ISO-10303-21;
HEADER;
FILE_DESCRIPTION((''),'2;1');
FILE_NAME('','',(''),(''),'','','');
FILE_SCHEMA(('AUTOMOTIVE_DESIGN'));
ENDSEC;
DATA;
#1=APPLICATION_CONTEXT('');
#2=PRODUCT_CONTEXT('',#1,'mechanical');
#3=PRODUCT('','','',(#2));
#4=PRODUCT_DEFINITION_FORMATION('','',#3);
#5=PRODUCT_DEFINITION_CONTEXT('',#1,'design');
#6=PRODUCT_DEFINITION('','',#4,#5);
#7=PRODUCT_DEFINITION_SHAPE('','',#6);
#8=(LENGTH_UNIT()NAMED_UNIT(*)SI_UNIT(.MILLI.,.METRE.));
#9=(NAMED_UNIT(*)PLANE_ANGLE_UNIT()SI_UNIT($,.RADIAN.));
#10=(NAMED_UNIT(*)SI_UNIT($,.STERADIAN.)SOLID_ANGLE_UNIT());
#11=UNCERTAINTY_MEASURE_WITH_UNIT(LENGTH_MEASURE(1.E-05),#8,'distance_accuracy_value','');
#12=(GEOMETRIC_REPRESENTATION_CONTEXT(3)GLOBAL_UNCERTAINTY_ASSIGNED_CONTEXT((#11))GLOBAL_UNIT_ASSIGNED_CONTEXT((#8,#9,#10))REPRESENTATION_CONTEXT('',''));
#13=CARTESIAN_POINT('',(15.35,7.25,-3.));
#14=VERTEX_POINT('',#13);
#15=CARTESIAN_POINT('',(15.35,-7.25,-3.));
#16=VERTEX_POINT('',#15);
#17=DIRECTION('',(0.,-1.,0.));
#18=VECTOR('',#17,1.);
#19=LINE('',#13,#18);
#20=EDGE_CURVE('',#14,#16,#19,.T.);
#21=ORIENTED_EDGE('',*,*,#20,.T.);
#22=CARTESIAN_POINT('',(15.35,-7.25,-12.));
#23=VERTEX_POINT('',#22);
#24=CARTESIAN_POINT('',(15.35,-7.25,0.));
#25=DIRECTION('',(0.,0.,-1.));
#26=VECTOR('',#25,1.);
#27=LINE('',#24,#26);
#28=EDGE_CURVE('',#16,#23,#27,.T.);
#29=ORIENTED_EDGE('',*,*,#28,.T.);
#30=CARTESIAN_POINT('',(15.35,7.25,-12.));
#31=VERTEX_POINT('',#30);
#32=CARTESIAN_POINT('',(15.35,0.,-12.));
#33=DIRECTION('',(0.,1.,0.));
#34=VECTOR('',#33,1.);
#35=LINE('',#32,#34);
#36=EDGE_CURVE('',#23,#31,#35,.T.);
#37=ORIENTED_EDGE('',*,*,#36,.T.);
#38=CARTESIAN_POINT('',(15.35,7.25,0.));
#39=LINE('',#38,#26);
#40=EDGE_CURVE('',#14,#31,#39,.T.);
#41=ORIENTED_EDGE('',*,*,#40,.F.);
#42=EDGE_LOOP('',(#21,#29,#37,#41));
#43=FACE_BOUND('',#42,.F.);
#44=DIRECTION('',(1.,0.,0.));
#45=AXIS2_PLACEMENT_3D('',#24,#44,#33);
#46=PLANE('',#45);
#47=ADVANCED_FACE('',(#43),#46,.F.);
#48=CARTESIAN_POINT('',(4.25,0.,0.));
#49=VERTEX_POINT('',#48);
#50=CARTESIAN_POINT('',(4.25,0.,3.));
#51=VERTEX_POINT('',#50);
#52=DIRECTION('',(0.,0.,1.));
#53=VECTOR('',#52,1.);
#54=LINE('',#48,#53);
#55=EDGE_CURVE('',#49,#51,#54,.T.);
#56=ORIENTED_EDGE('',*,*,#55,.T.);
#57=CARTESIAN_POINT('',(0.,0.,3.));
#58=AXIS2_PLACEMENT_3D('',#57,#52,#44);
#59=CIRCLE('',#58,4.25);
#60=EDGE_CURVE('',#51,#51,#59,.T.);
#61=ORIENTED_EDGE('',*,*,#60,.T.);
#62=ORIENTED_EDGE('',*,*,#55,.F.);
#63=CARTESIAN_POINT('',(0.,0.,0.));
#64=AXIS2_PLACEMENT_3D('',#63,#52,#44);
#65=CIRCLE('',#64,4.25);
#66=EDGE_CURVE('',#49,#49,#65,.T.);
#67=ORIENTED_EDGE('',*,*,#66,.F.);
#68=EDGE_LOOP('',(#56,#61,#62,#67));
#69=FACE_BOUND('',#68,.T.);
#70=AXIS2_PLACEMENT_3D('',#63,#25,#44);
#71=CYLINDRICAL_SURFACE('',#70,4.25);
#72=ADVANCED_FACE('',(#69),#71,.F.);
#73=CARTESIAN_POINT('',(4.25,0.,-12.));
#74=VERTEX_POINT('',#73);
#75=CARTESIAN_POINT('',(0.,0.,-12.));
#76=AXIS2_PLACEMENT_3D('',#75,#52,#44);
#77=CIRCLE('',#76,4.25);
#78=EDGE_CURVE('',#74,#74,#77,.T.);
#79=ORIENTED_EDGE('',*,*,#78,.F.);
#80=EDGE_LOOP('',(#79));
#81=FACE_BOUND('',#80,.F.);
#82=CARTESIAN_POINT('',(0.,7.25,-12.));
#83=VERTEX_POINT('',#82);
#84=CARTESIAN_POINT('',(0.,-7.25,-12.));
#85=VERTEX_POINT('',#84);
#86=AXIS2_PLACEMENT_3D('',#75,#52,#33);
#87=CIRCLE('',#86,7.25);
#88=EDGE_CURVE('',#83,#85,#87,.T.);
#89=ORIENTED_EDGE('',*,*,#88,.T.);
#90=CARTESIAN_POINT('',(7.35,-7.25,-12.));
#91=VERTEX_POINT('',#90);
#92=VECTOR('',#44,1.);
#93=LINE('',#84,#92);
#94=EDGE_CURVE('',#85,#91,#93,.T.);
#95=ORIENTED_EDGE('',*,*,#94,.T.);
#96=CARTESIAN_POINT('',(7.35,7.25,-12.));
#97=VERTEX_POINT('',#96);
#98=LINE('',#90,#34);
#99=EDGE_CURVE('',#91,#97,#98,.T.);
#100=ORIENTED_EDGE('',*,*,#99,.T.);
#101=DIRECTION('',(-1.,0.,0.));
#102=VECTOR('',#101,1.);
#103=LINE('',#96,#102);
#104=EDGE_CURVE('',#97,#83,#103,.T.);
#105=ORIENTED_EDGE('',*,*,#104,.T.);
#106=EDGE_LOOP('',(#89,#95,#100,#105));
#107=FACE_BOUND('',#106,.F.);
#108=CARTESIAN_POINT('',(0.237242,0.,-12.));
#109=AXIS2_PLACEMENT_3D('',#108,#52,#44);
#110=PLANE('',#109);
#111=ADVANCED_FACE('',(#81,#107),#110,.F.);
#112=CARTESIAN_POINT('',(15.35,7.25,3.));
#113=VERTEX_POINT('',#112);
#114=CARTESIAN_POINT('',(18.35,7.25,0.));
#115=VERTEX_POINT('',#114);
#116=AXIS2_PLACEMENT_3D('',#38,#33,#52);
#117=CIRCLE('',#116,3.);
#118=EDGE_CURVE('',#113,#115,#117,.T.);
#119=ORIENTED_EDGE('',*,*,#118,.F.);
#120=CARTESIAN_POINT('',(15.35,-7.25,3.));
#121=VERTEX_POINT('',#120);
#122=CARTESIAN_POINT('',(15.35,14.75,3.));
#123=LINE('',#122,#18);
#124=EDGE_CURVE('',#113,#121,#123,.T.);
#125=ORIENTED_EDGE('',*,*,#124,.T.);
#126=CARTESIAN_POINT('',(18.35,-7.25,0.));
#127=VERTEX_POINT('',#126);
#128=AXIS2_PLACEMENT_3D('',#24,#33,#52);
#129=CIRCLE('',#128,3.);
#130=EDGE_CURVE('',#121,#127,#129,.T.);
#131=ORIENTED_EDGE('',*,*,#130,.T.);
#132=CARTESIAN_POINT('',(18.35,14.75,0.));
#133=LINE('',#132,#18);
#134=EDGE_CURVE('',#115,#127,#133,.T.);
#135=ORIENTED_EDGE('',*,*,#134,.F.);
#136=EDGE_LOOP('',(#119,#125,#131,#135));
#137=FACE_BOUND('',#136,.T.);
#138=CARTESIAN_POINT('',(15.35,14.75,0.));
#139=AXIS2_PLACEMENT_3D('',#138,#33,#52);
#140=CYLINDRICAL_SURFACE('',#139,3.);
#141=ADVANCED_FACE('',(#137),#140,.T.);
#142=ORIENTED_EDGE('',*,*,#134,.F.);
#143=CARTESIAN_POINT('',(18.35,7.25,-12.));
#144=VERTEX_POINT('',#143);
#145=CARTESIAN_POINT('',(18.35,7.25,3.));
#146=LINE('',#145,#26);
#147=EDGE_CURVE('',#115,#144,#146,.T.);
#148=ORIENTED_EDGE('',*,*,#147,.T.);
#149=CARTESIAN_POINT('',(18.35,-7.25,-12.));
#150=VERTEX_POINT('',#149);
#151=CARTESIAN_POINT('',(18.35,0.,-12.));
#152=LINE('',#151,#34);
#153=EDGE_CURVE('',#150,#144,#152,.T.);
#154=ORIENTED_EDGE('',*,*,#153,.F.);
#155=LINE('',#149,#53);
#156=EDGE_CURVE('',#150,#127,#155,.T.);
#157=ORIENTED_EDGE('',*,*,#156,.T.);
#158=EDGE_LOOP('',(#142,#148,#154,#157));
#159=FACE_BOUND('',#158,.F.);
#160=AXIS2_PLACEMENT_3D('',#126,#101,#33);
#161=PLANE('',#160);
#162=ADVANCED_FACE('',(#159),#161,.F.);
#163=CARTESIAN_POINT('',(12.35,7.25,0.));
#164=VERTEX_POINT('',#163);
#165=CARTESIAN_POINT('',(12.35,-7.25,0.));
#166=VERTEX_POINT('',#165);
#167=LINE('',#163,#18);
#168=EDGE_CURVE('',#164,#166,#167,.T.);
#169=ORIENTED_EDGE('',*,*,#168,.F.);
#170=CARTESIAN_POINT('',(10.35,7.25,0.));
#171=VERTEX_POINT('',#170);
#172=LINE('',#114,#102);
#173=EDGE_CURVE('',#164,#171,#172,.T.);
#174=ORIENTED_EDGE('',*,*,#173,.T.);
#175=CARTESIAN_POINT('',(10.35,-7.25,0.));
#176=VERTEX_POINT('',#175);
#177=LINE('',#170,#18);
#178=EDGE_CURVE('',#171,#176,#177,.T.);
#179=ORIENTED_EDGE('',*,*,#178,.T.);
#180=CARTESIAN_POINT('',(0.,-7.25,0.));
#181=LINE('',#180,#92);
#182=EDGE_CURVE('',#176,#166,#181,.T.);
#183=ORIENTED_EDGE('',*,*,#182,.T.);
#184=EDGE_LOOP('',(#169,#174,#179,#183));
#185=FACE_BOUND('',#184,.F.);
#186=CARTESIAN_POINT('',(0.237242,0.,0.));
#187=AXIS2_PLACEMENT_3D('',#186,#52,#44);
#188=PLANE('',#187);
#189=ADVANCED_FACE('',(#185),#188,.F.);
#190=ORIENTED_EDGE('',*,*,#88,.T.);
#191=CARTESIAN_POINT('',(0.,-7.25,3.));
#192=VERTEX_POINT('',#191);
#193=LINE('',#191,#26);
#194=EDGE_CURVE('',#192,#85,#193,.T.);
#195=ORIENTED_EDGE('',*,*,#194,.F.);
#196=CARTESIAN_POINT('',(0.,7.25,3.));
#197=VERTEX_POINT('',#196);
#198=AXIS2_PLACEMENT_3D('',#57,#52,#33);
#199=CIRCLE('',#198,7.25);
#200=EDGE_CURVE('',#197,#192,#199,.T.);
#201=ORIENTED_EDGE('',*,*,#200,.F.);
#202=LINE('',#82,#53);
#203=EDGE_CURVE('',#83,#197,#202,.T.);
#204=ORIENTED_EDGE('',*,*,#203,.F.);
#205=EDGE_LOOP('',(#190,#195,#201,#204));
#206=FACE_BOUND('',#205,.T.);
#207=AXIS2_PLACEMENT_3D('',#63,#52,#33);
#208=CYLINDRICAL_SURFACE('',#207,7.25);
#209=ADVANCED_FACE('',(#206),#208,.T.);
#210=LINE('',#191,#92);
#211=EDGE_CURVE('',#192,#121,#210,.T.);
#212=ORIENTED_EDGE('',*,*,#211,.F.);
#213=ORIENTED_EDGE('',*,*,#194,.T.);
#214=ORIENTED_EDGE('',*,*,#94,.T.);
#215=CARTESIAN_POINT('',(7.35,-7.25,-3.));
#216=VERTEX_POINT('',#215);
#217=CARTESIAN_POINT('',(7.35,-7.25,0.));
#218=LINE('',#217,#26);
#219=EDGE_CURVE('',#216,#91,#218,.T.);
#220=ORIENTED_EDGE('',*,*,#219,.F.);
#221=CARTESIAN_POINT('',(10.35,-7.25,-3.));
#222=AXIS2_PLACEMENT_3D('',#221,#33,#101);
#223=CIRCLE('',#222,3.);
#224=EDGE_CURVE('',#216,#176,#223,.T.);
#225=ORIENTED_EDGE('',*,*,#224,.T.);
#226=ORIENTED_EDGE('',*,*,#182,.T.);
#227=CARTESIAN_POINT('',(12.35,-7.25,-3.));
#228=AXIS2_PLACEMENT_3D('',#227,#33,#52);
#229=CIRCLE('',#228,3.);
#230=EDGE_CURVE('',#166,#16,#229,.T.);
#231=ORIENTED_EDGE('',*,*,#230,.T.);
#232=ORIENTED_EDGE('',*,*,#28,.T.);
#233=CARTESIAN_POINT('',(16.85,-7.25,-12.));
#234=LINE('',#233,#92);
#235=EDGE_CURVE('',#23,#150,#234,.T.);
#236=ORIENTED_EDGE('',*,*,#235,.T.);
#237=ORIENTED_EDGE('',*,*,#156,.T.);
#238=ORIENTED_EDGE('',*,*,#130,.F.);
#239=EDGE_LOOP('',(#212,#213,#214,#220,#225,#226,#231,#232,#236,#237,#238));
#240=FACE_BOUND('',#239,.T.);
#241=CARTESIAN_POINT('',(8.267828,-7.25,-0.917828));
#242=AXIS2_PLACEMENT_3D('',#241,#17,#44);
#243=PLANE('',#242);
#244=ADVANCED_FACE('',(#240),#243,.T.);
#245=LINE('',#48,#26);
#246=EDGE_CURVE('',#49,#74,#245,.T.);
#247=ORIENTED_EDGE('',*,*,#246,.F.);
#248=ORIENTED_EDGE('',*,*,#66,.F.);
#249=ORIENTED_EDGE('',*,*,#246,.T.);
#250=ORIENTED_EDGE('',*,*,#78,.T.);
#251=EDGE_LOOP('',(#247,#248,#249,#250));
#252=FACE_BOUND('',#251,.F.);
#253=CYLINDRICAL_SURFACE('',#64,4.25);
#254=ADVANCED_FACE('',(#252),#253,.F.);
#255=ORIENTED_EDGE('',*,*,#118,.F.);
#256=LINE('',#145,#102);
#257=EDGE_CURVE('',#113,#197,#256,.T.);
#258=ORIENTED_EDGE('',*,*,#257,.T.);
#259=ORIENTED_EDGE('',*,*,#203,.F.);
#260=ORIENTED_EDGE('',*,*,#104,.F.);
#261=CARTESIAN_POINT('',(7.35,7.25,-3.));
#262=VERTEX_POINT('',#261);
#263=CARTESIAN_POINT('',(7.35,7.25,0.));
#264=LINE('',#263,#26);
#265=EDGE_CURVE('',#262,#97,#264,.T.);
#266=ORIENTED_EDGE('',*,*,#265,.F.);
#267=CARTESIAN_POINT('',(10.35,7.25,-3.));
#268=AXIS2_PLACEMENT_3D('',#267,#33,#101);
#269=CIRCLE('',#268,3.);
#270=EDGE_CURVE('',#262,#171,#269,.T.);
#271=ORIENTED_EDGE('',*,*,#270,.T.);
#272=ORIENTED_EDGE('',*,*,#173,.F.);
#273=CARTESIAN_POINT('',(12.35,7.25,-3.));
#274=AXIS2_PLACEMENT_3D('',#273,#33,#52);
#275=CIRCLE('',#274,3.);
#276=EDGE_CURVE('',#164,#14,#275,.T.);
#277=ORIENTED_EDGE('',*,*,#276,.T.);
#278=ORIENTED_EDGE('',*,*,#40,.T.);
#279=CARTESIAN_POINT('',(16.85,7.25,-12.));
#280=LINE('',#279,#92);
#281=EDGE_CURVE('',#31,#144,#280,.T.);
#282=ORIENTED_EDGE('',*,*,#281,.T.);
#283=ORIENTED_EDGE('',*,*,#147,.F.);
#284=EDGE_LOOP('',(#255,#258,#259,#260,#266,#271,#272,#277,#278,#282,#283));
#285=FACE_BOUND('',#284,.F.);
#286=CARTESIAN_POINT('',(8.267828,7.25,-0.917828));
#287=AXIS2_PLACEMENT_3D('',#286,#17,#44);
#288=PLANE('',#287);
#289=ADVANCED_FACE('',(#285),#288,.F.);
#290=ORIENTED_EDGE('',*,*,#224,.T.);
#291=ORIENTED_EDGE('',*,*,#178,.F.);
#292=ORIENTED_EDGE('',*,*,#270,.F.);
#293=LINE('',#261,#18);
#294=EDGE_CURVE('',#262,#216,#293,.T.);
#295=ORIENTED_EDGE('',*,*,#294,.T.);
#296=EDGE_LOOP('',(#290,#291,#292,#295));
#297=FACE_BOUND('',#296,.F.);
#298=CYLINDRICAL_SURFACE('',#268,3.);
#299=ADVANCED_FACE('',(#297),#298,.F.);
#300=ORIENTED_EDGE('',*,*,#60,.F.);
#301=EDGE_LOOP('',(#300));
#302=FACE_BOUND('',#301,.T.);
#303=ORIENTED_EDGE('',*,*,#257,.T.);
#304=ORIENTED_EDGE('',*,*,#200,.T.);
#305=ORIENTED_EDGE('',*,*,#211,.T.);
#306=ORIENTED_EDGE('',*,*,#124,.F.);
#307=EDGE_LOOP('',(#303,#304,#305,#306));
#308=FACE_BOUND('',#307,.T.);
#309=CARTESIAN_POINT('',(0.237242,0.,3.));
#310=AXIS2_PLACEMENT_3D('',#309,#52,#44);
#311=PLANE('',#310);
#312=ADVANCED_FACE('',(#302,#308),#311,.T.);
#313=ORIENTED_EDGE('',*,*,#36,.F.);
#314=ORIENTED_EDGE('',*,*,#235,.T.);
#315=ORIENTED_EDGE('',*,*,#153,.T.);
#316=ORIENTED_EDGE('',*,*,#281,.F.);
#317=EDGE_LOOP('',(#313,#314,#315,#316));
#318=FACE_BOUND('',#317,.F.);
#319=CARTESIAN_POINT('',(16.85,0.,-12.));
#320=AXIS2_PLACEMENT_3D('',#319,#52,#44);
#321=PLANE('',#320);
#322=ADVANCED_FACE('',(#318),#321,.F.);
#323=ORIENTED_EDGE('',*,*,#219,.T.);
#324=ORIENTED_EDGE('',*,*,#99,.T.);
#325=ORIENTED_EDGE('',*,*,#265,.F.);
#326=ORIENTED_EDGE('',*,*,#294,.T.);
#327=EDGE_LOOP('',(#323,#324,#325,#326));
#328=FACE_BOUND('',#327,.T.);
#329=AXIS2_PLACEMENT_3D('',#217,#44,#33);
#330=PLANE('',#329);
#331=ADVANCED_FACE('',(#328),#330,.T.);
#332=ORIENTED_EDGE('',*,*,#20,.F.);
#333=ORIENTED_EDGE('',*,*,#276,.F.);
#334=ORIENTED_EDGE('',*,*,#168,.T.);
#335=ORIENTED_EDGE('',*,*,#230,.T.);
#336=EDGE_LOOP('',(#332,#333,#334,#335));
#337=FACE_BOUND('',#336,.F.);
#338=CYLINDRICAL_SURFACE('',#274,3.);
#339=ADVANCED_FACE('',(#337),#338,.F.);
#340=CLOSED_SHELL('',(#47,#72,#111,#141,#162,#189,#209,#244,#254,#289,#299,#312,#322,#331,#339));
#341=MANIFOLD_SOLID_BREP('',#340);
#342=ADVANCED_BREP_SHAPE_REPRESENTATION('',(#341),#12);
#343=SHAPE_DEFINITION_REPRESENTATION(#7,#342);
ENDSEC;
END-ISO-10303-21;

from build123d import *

# Parameters (mm, degrees)
F0_R        = 4.25
F0_W        = 8
F0_H        = 14.5
F0_W_2      = 3
F1_DEPTH    = 3
F2_DEPTH    = 12
F3_T1_DEPTH = 14.5
F3_T3_DEPTH = 29.5
F5_R        = 4.25
F6_DEPTH    = 22
F7_DEPTH    = 3
F8_T1_DEPTH = 28


# Not quite as in the source:
# - a fillet or chamfer that OpenCascade refuses, or shapes differently, is made with other operations: its cross-section is extruded or revolved along the edge and cut away or added


with BuildPart() as f1:
    # F0 (on Top) → F1 (new body)
    with BuildSketch(Plane.XY):
        with BuildLine():
            ThreePointArc((0, -7.25), (5.1265241636, -5.1265241636), (7.25, 0))
            ThreePointArc((7.25, 0), (5.1265241636, 5.1265241636), (0, 7.25))
            ThreePointArc((0, 7.25), (-7.25, 0), (0, -7.25))
        make_face()
        Circle(F0_R, mode=Mode.SUBTRACT)
        with BuildLine():
            Line((7.25, -7.25), (7.25, 0))
            ThreePointArc((7.25, 0), (5.1265241636, -5.1265241636), (0, -7.25))
            Line((0, -7.25), (7.25, -7.25))
        make_face()
        with BuildLine():
            ThreePointArc((0, 7.25), (5.1265241636, 5.1265241636), (7.25, 0))
            Line((7.25, 0), (7.25, 7.25))
            Line((7.25, 7.25), (0, 7.25))
        make_face()
        Polygon((7.25, 7.25), (7.25, 0), (7.25, -7.25), (7.35, -7.25), (7.35, 7.25), align=None)
        with Locations((11.35, 0)):
            Rectangle(F0_W, F0_H)
        with Locations((16.85, 0)):
            Rectangle(F0_W_2, F0_H)
    extrude(amount=F1_DEPTH)

    # F0 (on Top) → F2 (join)
    with BuildSketch(Plane.XY):
        with BuildLine():
            ThreePointArc((0, -7.25), (5.1265241636, -5.1265241636), (7.25, 0))
            ThreePointArc((7.25, 0), (5.1265241636, 5.1265241636), (0, 7.25))
            ThreePointArc((0, 7.25), (-7.25, 0), (0, -7.25))
        make_face()
        Circle(F0_R, mode=Mode.SUBTRACT)
        with BuildLine():
            ThreePointArc((0, 7.25), (5.1265241636, 5.1265241636), (7.25, 0))
            Line((7.25, 0), (7.25, 7.25))
            Line((7.25, 7.25), (0, 7.25))
        make_face()
        Polygon((7.25, 7.25), (7.25, 0), (7.25, -7.25), (7.35, -7.25), (7.35, 7.25), align=None)
        with Locations((16.85, 0)):
            Rectangle(F0_W_2, F0_H)
        with BuildLine():
            Line((7.25, -7.25), (7.25, 0))
            ThreePointArc((7.25, 0), (5.1265241636, -5.1265241636), (0, -7.25))
            Line((0, -7.25), (7.25, -7.25))
        make_face()
    extrude(amount=-F2_DEPTH)

    # F3: fillet of radius 3 on 3 edges, made by hand

    # F3_s2 → F3_t1 (join)
    with BuildSketch(Plane.XZ.offset(-7.25)):
        with BuildLine():
            ThreePointArc((7.35, -3), (8.2286796564, -0.8786796564), (10.35, 0))
            Line((10.35, 0), (7.35, 0))
            Line((7.35, 0), (7.35, -3))
        make_face()
        with BuildLine():
            ThreePointArc((12.35, 0), (14.4713203436, -0.8786796564), (15.35, -3))
            Line((15.35, -3), (15.35, 0))
            Line((15.35, 0), (12.35, 0))
        make_face()
    extrude(amount=F3_T1_DEPTH)

    # F3_s4 → F3_t3 (cut)
    with BuildSketch(Plane.XZ.offset(-14.75)):
        with BuildLine():
            ThreePointArc((15.35, 3), (17.4713203436, 2.1213203436), (18.35, 0))
            Line((18.35, 0), (18.35, 3))
            Line((18.35, 3), (15.35, 3))
        make_face()
    extrude(amount=F3_T3_DEPTH, mode=Mode.SUBTRACT)


with BuildPart() as f6:
    # F5 (on offset) → F6 (new body)
    with BuildSketch(Plane(origin=(0, 0, -37), x_dir=(1, 0, 0), z_dir=(0, 0, -1))):
        with BuildLine():
            Line((7.35, 7.25), (0, 7.25))
            ThreePointArc((0, 7.25), (-7.25, 0), (0, -7.25))
            Line((0, -7.25), (7.35, -7.25))
            Line((7.35, -7.25), (7.35, 7.25))
        make_face()
        Circle(F5_R, mode=Mode.SUBTRACT)
    extrude(amount=-F6_DEPTH)

    # F5 (on offset) → F7 (join)
    with BuildSketch(Plane(origin=(0, 0, -37), x_dir=(1, 0, 0), z_dir=(0, 0, -1))):
        with BuildLine():
            Line((7.35, 7.25), (0, 7.25))
            ThreePointArc((0, 7.25), (-7.25, 0), (0, -7.25))
            Line((0, -7.25), (7.35, -7.25))
            Line((7.35, -7.25), (7.35, 7.25))
        make_face()
        Circle(F5_R, mode=Mode.SUBTRACT)
        with BuildLine():
            ThreePointArc((0, -7.25), (-7.25, 0), (0, 7.25))
            Line((0, 7.25), (-37.25, 7.25))
            Line((-37.25, 7.25), (-37.25, 4))
            Line((-37.25, 4), (-22.25, 4))
            ThreePointArc((-22.25, 4), (-18.25, 0), (-22.25, -4))
            Line((-22.25, -4), (-37.25, -4))
            Line((-37.25, -4), (-37.25, -7.25))
            Line((-37.25, -7.25), (0, -7.25))
        make_face()
    extrude(amount=F7_DEPTH)

    # F8: fillet of radius 5 on 2 edges, made by hand

    # F8_s2 → F8_t1 (cut)
    with BuildSketch(Plane.XY.offset(-52.5)):
        with BuildLine():
            ThreePointArc((-32.25, -7.25), (-35.7855339059, -5.7855339059), (-37.25, -2.25))
            Line((-37.25, -2.25), (-37.25, -7.25))
            Line((-37.25, -7.25), (-32.25, -7.25))
        make_face()
        with BuildLine():
            ThreePointArc((-32.25, 7.25), (-35.7855339059, 5.7855339059), (-37.25, 2.25))
            Line((-37.25, 2.25), (-37.25, 7.25))
            Line((-37.25, 7.25), (-32.25, 7.25))
        make_face()
    extrude(amount=F8_T1_DEPTH, mode=Mode.SUBTRACT)


solid = f1.part
